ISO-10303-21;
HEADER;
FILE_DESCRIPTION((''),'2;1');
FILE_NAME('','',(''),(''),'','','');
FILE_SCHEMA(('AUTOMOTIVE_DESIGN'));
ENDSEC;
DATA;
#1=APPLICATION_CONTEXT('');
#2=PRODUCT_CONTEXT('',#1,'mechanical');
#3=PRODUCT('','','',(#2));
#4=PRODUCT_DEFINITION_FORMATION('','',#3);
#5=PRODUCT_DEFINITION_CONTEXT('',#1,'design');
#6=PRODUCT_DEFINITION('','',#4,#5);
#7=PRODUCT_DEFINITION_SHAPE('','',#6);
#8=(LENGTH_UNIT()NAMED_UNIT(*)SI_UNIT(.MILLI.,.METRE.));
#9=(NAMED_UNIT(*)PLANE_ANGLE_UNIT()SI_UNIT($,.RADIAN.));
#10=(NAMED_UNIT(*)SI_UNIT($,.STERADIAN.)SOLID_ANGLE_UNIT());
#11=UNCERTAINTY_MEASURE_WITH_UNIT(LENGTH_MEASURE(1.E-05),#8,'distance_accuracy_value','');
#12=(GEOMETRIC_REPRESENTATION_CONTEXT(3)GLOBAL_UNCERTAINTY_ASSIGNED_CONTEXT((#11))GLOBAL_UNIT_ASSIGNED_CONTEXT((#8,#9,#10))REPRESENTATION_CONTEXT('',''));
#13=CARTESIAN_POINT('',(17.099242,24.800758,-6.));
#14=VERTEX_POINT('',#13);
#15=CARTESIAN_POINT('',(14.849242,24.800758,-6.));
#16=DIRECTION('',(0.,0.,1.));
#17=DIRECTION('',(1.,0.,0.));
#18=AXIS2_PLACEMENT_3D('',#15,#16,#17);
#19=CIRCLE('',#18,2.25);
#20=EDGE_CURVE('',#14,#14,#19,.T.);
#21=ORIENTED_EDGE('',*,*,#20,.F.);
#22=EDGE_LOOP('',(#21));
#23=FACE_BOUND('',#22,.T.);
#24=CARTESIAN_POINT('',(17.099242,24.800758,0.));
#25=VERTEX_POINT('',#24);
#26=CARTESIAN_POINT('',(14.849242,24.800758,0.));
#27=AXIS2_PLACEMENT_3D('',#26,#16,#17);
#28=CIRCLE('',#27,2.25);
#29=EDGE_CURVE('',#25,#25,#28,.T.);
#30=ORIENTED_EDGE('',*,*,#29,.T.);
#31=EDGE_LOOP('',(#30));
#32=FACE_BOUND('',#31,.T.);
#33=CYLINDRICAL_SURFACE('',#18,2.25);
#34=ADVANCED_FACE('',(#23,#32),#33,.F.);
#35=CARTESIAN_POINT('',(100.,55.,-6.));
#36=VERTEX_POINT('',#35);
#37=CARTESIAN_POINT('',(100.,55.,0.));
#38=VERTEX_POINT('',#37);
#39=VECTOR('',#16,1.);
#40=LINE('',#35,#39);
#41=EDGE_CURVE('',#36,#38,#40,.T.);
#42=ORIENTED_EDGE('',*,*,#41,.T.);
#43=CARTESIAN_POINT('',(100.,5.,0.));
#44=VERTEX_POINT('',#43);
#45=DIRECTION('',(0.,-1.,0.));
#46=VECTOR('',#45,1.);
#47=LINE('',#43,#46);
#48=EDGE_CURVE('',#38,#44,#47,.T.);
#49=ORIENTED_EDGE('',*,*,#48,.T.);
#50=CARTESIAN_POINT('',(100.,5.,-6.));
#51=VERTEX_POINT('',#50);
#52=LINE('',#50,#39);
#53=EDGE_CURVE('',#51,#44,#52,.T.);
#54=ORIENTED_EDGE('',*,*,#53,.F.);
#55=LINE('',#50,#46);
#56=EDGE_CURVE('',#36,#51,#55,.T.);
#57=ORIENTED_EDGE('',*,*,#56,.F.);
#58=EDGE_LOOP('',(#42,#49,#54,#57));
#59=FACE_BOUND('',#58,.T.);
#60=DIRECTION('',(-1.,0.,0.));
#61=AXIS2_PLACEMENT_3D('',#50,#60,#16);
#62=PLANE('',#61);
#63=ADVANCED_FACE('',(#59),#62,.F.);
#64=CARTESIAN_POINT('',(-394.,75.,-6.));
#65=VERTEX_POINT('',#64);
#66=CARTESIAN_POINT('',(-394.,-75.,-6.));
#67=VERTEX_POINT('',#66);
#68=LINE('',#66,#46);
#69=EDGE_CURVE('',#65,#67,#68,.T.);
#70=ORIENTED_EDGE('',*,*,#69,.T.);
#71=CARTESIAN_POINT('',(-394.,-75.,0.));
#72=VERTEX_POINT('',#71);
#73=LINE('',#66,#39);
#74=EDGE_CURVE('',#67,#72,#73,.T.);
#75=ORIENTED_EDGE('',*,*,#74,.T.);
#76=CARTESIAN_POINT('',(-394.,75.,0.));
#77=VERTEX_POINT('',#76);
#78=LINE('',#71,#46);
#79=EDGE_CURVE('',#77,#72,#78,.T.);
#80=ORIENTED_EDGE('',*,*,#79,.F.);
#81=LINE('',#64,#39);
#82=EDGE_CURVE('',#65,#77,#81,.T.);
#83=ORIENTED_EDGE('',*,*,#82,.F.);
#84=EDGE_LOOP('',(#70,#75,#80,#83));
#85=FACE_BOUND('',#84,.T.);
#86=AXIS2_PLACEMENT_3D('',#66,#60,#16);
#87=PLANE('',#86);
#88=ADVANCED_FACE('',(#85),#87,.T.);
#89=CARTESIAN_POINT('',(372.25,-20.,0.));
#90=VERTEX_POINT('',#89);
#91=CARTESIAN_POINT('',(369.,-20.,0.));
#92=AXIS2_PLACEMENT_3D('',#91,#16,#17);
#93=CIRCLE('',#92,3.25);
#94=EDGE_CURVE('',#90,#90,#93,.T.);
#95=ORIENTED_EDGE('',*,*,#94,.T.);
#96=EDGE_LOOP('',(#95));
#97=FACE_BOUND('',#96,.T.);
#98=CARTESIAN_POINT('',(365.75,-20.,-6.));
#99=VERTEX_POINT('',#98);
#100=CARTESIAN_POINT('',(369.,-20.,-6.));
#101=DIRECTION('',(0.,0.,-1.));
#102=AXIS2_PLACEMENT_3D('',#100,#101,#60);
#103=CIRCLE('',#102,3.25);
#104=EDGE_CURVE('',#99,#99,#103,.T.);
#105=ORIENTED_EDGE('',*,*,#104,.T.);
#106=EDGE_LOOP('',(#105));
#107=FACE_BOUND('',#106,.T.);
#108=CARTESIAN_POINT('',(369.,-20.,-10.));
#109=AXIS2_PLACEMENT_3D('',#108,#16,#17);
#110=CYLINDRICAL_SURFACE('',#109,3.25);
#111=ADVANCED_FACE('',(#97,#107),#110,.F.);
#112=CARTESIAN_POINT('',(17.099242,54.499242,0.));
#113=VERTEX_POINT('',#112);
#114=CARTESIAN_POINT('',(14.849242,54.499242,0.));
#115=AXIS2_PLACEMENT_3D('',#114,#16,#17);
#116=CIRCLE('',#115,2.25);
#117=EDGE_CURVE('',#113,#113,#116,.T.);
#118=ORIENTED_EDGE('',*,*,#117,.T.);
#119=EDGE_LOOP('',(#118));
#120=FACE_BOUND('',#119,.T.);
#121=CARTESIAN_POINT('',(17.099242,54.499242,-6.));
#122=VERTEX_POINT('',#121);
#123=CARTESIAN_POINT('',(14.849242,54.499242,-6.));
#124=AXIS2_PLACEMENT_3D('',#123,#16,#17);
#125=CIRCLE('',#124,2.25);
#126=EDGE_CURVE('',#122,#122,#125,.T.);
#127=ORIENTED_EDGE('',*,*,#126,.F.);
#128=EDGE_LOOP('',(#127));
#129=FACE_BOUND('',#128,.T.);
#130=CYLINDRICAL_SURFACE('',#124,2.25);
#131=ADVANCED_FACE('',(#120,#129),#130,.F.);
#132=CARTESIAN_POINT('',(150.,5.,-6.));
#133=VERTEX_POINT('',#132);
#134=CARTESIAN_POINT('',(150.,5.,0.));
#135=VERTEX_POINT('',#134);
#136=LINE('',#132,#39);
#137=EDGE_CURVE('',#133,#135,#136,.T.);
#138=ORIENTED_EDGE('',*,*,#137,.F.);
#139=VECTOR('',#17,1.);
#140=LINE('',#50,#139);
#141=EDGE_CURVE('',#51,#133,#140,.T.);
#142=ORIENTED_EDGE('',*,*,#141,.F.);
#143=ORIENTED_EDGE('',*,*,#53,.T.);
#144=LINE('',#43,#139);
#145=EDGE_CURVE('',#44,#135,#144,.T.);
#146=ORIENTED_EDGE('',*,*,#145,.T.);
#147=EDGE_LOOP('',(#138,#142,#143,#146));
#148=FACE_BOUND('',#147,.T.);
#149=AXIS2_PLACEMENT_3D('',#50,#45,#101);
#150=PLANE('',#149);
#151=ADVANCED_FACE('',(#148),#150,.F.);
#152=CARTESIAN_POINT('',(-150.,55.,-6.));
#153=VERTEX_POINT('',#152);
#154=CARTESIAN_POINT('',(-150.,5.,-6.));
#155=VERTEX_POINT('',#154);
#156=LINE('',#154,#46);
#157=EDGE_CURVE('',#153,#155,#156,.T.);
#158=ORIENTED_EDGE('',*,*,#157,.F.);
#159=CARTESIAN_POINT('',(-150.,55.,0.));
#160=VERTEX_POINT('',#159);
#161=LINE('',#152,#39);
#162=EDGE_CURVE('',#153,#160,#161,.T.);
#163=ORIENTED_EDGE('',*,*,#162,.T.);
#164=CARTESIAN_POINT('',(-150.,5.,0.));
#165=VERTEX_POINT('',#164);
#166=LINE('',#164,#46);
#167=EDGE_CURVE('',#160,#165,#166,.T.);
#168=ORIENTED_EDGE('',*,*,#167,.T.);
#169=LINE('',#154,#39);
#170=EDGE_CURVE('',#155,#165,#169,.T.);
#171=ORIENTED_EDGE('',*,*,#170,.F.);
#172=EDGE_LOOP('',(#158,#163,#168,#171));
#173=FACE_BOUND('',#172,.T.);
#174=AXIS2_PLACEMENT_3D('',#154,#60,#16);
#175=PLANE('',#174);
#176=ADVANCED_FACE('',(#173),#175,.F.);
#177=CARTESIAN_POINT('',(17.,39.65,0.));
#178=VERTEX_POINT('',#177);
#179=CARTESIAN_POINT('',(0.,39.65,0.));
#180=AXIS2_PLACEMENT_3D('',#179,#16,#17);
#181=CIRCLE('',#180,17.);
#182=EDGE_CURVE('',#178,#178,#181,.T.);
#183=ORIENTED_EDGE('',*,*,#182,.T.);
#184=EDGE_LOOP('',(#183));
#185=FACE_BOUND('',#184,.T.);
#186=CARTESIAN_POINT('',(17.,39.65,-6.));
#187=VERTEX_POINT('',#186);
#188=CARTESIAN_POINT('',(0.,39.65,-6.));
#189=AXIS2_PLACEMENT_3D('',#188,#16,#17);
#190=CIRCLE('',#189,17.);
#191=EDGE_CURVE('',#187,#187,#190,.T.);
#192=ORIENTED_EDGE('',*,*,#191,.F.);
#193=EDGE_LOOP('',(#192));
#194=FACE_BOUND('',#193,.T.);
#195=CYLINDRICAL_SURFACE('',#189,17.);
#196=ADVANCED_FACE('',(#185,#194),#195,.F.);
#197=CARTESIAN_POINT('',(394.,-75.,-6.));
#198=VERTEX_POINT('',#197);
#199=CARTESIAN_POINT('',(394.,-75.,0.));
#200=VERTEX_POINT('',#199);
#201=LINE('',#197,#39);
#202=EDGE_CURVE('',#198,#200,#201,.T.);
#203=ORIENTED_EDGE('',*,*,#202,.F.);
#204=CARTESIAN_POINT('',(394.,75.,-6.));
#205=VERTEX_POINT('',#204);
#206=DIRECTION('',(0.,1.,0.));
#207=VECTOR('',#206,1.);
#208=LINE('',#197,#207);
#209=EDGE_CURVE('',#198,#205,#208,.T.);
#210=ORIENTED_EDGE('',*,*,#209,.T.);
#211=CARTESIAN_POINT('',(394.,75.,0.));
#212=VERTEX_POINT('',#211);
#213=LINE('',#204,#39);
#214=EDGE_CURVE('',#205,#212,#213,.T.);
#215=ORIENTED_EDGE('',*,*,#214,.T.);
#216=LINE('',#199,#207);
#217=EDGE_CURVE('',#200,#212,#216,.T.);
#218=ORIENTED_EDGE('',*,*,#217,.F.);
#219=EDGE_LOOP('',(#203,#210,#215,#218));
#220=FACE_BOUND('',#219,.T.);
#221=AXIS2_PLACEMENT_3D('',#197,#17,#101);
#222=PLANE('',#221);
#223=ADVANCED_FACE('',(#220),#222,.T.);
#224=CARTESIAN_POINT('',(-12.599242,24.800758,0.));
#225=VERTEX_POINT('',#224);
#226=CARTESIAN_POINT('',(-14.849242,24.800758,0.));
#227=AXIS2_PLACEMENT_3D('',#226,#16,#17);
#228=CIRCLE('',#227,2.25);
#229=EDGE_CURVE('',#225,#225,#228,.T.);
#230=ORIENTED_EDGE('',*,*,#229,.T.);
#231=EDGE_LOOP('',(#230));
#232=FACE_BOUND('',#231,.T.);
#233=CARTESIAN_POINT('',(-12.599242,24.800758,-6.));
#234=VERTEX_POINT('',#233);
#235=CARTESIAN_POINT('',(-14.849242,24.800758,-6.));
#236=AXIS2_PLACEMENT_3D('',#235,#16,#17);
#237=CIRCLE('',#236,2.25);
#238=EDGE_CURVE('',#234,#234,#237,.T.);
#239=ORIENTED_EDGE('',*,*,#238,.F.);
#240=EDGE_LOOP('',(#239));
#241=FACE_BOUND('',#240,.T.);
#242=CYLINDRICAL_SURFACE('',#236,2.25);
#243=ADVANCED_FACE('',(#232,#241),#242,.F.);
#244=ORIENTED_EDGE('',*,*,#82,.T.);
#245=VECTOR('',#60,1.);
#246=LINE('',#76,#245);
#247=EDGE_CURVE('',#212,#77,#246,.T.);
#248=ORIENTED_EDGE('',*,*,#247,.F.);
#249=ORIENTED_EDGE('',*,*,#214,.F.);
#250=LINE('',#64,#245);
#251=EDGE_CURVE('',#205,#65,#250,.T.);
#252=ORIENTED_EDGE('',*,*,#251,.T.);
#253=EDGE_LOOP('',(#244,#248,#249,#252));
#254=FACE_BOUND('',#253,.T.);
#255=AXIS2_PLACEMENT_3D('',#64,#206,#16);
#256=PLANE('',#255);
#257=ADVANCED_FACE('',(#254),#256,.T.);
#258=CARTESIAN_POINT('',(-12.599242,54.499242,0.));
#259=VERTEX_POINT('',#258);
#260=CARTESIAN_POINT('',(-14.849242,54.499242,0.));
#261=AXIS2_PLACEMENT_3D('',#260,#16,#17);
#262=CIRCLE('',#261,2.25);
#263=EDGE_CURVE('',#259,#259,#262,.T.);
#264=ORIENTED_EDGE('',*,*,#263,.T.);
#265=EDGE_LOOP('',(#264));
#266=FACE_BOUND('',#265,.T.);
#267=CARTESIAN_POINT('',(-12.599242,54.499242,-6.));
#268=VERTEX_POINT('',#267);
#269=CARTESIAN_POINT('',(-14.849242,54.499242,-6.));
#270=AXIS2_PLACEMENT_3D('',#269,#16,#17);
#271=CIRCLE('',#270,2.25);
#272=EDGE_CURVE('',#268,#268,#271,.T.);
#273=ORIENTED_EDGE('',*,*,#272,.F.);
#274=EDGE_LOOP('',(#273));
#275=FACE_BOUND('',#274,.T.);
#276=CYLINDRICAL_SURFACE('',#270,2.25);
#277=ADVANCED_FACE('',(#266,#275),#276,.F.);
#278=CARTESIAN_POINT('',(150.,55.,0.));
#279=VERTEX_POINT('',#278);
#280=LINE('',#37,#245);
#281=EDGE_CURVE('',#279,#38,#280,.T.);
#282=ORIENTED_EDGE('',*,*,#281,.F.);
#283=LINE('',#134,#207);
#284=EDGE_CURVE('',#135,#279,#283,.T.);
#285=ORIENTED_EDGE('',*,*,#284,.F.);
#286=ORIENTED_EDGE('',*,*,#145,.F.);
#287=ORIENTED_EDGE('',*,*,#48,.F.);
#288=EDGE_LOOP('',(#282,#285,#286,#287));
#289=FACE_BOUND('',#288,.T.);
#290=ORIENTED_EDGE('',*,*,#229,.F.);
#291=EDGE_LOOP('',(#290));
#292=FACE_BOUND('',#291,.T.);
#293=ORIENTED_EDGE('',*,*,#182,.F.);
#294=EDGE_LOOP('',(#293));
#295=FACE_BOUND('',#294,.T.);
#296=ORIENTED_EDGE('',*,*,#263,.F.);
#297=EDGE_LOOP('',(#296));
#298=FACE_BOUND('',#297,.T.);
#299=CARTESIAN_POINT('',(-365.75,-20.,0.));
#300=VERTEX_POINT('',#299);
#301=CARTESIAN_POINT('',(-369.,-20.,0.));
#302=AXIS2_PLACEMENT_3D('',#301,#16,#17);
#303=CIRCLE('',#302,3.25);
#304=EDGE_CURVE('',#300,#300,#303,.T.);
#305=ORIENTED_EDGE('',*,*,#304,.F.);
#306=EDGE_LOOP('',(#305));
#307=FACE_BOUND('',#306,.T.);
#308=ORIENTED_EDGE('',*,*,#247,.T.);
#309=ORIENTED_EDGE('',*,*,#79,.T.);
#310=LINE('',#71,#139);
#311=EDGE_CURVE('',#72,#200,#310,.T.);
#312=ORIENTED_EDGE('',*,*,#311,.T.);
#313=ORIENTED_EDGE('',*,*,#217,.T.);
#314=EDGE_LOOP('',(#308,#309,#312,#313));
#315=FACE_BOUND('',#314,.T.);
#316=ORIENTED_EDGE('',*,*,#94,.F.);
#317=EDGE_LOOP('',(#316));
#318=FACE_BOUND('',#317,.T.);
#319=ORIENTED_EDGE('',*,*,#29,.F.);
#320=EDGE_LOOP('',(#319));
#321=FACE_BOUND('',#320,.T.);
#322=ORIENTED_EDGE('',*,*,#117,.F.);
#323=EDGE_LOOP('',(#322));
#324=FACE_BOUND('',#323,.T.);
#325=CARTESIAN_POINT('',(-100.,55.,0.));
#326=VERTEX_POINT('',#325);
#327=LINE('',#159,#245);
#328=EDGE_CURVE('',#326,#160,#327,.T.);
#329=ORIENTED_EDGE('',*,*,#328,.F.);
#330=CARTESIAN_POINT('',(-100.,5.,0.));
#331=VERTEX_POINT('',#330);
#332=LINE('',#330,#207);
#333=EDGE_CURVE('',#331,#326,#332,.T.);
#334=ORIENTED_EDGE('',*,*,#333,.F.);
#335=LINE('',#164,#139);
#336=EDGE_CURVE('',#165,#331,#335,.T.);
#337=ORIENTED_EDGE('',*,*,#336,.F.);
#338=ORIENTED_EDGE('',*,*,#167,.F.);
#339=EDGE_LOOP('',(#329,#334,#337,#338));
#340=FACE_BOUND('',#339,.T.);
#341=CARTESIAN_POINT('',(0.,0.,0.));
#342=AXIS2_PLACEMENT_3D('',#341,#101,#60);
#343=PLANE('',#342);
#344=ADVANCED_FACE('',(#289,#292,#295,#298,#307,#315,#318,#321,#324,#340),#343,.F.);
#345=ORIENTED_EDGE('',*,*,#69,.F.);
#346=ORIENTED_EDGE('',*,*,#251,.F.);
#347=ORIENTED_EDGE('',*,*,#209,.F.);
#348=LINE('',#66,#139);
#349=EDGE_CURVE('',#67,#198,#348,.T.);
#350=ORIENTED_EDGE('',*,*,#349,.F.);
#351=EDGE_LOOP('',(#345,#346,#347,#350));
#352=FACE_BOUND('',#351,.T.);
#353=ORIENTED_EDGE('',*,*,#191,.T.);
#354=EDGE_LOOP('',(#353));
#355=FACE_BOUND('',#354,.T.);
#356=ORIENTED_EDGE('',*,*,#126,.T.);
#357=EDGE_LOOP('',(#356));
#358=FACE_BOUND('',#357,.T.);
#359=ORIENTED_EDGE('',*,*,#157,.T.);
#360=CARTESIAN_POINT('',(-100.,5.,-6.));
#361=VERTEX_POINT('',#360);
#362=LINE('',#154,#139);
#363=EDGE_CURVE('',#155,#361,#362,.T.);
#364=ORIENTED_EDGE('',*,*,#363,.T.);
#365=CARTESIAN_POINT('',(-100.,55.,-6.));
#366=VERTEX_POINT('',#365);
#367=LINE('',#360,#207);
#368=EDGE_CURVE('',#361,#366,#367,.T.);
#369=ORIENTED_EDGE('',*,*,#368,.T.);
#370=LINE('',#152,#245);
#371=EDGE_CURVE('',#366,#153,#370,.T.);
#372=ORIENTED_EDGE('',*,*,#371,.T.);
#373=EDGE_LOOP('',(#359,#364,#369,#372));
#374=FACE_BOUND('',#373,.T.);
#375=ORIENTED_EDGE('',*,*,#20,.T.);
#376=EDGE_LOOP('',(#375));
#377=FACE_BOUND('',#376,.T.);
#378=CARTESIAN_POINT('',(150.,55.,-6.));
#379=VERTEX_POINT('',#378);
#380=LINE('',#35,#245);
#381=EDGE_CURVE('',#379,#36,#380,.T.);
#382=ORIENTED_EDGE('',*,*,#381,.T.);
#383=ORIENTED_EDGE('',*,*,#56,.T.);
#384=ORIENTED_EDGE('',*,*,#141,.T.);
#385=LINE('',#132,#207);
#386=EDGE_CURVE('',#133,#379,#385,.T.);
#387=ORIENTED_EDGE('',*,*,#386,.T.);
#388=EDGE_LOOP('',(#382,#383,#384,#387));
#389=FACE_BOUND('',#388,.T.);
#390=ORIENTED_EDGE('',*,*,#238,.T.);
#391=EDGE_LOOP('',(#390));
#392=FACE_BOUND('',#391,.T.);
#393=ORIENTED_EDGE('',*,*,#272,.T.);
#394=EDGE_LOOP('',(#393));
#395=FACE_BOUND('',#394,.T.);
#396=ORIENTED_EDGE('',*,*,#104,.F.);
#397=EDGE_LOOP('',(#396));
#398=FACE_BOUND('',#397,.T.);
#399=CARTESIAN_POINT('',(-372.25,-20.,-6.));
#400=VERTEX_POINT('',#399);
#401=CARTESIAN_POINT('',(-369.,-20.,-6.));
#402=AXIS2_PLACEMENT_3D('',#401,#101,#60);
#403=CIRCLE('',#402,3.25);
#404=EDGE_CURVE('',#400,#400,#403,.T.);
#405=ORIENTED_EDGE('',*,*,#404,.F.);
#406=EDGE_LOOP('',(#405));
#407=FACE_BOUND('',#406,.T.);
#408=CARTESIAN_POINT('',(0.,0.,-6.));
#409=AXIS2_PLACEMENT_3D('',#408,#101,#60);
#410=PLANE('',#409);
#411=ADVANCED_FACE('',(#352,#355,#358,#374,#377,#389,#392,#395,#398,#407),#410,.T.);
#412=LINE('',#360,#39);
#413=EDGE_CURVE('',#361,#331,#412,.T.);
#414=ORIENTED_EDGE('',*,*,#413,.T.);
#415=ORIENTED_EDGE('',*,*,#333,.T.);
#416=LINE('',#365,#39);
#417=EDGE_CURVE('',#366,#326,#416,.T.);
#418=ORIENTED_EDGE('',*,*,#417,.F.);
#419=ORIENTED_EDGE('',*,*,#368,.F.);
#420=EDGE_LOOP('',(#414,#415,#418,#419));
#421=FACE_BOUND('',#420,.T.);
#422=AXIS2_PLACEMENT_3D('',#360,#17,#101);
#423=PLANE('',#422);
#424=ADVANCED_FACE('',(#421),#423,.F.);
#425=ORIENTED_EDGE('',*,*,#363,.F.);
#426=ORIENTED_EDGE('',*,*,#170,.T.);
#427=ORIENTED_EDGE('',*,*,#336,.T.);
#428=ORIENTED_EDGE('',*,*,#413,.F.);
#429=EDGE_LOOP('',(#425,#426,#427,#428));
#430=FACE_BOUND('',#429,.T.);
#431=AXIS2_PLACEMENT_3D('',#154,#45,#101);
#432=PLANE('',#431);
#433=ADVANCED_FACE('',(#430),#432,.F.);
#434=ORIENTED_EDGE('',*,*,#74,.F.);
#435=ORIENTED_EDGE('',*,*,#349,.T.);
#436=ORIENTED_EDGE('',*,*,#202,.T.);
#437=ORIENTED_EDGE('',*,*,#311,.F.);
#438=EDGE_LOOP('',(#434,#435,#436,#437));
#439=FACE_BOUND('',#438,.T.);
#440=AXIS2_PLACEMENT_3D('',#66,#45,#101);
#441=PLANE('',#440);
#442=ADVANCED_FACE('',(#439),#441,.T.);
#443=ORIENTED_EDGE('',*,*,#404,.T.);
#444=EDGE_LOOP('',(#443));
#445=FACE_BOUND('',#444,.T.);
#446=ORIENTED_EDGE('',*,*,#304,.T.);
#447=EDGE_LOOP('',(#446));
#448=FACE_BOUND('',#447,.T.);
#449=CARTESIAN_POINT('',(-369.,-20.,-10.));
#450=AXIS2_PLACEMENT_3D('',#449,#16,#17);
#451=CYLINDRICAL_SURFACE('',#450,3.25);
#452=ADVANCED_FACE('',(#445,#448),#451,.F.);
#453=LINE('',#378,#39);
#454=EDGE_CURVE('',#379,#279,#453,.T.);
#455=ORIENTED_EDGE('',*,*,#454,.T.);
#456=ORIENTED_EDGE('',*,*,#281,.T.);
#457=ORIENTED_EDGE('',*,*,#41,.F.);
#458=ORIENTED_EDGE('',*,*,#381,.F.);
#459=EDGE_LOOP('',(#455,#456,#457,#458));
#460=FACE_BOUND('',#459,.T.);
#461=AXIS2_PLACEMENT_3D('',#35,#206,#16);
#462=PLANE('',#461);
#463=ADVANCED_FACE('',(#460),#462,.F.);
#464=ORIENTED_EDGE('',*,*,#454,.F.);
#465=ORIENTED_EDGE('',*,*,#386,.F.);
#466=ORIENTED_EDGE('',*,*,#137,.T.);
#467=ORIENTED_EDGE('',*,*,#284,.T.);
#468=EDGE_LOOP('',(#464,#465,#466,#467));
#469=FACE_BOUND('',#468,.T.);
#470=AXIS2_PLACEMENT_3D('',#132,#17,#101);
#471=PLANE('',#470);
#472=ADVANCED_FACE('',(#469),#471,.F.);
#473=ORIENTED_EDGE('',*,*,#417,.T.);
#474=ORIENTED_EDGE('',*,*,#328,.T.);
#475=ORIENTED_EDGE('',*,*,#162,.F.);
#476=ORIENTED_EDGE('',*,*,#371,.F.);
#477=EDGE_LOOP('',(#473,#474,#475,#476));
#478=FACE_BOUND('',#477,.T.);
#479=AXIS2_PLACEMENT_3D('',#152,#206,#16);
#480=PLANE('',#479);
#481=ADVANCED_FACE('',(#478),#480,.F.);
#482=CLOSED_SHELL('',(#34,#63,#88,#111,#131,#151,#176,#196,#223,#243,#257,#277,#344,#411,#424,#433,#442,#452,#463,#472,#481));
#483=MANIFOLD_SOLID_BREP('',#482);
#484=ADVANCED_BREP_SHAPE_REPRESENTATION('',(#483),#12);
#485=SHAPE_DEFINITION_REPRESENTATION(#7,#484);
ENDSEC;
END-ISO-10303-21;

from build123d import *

# Parameters (mm, degrees)
SKETCH1_W          = 788
SKETCH1_H          = 150
BASE_FLANGE1_DEPTH = 6
SKETCH2_R          = 2.25
SKETCH2_R_2        = 17
SKETCH2_W          = 50
SKETCH2_H          = 50
CUT_EXTRUDE1_DEPTH = 402.119682888
SKETCH3_R          = 3.25
CUT_EXTRUDE2_DEPTH = 10


# Sheet-metal steps are written as plain solids
with BuildPart() as part:
    # Sketch1 → Base-Flange1 (new body)
    with BuildSketch(Plane.XY):
        Rectangle(SKETCH1_W, SKETCH1_H)
    extrude(amount=-BASE_FLANGE1_DEPTH)

    # Sketch2 → Cut-Extrude1 (cut, through all)
    with BuildSketch(Plane.XY):
        with Locations((14.849242405, 54.499242405)):
            Circle(SKETCH2_R)
        with Locations((-14.849242405, 54.499242405)):
            Circle(SKETCH2_R)
        with Locations((-14.849242405, 24.800757595)):
            Circle(SKETCH2_R)
        with Locations((14.849242405, 24.800757595)):
            Circle(SKETCH2_R)
        with Locations((0, 39.65)):
            Circle(SKETCH2_R_2)
        with Locations((-125, 30)):
            Rectangle(SKETCH2_W, SKETCH2_H)
        with Locations((125, 30)):
            Rectangle(SKETCH2_W, SKETCH2_H)
    extrude(amount=-CUT_EXTRUDE1_DEPTH, mode=Mode.SUBTRACT)

    # Sketch3 → Cut-Extrude2 (cut)
    with BuildSketch(Plane.XY):
        with Locations((369, -20)):
            Circle(SKETCH3_R)
        with Locations((-369, -20)):
            Circle(SKETCH3_R)
    extrude(amount=-CUT_EXTRUDE2_DEPTH, mode=Mode.SUBTRACT)


solid = part.part
